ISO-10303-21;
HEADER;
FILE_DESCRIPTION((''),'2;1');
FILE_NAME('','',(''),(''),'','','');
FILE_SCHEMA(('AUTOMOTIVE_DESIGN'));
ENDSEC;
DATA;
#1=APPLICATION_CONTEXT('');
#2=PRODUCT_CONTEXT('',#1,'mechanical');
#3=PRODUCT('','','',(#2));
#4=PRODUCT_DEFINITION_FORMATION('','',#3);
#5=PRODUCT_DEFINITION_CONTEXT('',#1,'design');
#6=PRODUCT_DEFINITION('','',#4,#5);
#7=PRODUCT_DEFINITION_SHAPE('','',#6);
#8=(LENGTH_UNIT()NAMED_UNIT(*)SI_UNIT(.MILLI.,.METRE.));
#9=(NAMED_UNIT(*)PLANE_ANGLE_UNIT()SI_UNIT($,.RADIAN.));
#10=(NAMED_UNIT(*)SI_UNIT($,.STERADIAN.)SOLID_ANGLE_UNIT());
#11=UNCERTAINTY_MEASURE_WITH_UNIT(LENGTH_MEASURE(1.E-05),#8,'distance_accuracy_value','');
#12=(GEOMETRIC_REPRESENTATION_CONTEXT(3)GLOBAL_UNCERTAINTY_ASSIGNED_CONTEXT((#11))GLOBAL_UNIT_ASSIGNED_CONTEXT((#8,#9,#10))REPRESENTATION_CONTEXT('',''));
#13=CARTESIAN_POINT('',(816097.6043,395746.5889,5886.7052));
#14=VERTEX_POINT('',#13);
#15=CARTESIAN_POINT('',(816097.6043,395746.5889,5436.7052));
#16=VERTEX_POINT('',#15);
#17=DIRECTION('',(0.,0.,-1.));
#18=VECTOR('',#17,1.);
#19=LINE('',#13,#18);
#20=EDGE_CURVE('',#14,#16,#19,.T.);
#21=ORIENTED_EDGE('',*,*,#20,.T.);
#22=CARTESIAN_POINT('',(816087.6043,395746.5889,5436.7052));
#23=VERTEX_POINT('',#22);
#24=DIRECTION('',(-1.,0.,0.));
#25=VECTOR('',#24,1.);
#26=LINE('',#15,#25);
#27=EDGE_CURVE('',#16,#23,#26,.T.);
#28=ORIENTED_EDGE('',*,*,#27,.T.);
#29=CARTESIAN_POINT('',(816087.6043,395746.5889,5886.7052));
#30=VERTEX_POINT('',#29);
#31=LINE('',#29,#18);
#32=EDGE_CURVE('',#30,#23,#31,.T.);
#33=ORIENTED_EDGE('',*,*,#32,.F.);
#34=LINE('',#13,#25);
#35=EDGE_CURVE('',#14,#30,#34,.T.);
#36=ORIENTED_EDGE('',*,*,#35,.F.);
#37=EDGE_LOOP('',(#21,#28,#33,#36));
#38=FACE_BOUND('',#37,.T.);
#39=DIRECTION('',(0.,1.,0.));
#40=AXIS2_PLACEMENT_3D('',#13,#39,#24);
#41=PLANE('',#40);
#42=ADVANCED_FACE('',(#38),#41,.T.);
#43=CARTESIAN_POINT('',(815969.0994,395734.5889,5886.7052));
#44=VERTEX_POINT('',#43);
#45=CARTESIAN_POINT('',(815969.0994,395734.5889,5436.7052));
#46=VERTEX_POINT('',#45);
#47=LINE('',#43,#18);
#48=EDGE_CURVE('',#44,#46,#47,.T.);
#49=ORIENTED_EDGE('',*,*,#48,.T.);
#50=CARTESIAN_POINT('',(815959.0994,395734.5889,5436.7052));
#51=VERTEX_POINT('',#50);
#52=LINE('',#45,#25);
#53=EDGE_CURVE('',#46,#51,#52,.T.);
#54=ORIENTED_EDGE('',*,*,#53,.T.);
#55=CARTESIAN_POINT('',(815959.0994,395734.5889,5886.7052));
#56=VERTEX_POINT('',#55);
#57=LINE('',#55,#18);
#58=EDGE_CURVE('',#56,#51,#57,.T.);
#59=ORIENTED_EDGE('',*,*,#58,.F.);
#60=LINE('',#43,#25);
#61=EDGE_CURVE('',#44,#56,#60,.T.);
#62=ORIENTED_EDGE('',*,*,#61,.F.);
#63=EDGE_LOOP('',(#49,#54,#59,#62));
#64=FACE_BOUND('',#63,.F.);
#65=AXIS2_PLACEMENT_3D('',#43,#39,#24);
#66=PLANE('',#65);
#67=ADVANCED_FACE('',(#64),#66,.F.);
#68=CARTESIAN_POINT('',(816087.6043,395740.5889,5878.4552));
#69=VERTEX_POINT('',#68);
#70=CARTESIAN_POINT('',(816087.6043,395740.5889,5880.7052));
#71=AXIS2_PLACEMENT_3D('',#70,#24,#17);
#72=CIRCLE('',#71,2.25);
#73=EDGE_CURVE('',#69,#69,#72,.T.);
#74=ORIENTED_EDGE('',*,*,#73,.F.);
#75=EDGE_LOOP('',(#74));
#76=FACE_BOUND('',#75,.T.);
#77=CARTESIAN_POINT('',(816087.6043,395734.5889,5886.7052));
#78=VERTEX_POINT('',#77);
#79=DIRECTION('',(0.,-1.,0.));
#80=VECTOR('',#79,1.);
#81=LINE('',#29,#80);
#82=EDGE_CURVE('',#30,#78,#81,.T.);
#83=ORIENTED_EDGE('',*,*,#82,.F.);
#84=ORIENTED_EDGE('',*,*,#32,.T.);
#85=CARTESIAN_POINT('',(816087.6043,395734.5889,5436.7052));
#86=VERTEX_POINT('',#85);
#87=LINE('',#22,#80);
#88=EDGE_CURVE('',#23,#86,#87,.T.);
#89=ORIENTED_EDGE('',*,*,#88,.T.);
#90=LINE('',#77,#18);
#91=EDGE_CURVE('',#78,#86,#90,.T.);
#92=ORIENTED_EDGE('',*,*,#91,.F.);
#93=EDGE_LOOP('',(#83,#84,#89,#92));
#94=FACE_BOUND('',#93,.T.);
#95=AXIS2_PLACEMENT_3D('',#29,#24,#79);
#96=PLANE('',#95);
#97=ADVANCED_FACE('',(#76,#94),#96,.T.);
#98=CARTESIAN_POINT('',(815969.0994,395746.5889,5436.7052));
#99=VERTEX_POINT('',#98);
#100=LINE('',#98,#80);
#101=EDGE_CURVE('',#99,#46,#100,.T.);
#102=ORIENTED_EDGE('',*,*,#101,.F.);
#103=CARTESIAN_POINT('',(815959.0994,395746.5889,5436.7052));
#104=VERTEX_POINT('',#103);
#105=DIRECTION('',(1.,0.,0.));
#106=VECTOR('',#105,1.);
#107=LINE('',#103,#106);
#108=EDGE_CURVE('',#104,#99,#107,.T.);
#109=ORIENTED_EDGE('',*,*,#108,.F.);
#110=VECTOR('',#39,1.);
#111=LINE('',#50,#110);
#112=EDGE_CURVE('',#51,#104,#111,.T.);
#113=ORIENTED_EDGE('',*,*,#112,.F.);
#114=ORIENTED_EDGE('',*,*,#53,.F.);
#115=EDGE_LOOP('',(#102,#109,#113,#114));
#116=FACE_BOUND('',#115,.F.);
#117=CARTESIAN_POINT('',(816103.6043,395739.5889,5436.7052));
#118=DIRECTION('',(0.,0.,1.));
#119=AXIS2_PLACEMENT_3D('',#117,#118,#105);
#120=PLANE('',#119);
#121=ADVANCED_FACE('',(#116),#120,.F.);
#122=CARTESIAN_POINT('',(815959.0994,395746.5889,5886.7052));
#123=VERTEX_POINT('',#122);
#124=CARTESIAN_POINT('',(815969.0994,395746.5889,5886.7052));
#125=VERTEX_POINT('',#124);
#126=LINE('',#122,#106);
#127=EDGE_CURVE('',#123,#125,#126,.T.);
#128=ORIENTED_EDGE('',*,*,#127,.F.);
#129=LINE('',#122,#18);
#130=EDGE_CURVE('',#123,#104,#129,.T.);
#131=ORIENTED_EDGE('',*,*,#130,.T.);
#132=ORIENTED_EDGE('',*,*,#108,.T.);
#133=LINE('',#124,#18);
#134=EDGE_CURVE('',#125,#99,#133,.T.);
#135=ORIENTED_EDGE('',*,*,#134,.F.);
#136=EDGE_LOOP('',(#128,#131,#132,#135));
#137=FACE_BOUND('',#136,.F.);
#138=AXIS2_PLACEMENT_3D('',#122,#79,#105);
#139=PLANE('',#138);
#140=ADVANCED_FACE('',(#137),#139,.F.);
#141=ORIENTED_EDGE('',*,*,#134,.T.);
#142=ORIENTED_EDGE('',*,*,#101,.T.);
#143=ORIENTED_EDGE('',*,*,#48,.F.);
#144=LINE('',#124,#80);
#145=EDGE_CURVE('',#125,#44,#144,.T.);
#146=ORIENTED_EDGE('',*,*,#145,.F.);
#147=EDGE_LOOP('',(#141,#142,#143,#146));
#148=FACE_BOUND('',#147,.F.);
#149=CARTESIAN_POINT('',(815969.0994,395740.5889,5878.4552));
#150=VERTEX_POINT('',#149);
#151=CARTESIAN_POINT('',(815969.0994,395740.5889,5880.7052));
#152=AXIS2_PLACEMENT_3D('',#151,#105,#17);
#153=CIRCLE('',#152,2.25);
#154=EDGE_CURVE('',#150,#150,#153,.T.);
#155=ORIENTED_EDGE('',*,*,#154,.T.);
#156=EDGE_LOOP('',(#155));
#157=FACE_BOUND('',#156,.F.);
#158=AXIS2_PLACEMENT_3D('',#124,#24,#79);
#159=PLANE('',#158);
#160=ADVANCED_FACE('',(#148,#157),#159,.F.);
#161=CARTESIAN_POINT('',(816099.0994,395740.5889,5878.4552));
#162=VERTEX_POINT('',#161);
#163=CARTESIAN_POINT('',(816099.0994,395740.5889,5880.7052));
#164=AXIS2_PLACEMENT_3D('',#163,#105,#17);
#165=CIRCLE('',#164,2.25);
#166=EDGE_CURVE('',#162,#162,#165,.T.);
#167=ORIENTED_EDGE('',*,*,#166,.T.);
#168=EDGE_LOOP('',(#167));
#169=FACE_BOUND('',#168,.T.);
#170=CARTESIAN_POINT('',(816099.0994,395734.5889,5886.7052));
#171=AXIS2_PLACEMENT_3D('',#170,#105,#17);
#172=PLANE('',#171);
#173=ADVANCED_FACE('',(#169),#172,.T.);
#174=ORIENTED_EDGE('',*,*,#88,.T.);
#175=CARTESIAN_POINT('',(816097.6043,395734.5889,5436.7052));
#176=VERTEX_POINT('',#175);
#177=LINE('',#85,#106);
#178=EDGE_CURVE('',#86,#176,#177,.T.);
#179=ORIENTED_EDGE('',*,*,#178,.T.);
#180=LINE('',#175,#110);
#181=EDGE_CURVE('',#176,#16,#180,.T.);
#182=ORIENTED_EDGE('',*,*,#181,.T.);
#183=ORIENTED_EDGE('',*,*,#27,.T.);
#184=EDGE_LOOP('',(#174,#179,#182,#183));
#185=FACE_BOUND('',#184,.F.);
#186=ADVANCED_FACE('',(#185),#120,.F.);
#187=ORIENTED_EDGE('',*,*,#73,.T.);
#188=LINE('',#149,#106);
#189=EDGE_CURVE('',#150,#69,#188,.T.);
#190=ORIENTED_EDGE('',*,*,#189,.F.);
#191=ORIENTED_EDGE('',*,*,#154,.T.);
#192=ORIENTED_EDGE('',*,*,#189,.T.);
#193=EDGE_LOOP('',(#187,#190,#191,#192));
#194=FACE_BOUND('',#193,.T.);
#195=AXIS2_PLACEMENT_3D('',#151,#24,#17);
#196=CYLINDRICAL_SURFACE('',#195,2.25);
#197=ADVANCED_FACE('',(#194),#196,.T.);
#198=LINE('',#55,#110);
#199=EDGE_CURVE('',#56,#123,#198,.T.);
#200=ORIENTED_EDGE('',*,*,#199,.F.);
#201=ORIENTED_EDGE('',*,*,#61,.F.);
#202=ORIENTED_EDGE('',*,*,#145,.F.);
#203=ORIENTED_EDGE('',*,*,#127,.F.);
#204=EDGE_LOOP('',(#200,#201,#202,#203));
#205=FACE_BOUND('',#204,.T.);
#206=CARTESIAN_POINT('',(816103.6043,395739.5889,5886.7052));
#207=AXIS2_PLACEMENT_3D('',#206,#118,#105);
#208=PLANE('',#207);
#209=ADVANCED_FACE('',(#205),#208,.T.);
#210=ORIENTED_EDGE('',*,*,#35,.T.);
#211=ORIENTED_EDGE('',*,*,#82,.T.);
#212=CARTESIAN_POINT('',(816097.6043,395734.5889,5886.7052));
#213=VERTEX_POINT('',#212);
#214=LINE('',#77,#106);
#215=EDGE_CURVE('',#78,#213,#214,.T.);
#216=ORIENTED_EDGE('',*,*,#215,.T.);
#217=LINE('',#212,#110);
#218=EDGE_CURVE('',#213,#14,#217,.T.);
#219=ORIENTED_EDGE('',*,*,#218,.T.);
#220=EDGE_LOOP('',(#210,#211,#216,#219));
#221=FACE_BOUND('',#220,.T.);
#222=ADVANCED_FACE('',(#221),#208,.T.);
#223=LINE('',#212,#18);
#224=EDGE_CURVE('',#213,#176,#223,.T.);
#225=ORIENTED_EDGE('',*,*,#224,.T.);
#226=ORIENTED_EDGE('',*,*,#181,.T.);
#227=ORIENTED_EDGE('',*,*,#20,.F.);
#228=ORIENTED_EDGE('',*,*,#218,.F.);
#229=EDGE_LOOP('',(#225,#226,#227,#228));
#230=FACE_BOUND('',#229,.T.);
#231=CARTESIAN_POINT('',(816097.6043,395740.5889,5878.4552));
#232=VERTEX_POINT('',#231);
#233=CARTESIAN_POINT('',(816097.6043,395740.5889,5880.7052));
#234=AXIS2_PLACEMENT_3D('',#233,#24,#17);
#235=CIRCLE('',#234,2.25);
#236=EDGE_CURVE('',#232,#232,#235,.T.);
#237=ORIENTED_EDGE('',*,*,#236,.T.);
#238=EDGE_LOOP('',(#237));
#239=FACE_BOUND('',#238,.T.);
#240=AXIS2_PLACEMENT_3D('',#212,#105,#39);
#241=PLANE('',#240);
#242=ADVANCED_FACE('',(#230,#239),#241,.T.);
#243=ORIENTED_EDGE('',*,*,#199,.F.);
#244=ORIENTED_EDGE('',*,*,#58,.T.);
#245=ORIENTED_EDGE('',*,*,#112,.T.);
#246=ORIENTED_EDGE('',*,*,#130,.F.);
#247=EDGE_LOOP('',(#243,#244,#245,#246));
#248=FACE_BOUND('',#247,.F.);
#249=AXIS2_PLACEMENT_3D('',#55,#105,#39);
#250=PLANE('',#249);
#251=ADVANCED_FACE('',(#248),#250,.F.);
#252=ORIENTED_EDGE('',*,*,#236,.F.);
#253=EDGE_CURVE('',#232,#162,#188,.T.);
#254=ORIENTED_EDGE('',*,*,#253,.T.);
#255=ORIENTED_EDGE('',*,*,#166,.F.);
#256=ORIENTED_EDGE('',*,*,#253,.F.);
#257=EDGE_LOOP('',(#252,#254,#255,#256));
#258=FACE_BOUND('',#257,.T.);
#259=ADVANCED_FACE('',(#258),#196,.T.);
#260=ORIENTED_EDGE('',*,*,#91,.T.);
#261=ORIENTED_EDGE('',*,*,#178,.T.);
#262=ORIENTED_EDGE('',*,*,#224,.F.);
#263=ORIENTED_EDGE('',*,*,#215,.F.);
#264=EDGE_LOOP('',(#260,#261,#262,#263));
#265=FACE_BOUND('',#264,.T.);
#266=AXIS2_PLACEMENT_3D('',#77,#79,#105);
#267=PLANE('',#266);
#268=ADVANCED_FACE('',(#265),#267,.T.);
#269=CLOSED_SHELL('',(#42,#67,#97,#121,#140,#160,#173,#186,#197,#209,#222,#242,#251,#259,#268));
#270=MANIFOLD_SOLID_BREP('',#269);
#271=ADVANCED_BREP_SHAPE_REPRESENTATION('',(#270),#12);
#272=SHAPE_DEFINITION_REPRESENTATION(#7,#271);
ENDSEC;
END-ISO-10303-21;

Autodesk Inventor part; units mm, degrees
ref_plane "YZ Plane" through (0, 0, 0) normal (1, 0, 0) x (0, 1, 0)
ref_plane "XZ Plane" through (0, 0, 0) normal (0, 1, 0) x (-1, 0, 0)
ref_plane "XY Plane" through (0, 0, 0) normal (0, 0, 1) x (1, 0, 0)
ref_plane "Work Plane1" through (816103.6043, 395739.5889, 5886.7052) normal (0, 0, 1) x (1, 0, 0)
sketch "Sketch1" plane through (816103.6043, 395739.5889, 5886.7052) normal (0, 0, 1) x (1, 0, 0)
  line L0 (-6, 7) -> (-16, 7)
  line L1 (-16, 7) -> (-16, -5)
  line L2 (-16, -5) -> (-6, -5)
  line L3 (-6, -5) -> (-6, 7)
  line L4 (-144.5049, 7) -> (-134.5049, 7)
  line L5 (-134.5049, 7) -> (-134.5049, -5)
  line L6 (-134.5049, -5) -> (-144.5049, -5)
  line L7 (-144.5049, -5) -> (-144.5049, 7)
  point P0 (-816103.6043, -395739.5889)
  dimension "d0" = 10
  dimension "d1" = 12
  dimension "d2" = 10
  dimension "d3" = 12
extrude "Extrusion1" add sketch "Sketch1" against normal blind 450
sketch "Sketch2" plane through (815969.0994, 395734.5889, 5886.7052) normal (1, 0, 0) x (0, 0, -1)
  circle A0 centre (6, 6) radius 2.25
  point P0 (5886.7052, -395734.5889)
  dimension "d6" = 4.5
extrude "Extrusion2" add sketch "Sketch2" along normal blind 130
properties part number "antebrazo"
